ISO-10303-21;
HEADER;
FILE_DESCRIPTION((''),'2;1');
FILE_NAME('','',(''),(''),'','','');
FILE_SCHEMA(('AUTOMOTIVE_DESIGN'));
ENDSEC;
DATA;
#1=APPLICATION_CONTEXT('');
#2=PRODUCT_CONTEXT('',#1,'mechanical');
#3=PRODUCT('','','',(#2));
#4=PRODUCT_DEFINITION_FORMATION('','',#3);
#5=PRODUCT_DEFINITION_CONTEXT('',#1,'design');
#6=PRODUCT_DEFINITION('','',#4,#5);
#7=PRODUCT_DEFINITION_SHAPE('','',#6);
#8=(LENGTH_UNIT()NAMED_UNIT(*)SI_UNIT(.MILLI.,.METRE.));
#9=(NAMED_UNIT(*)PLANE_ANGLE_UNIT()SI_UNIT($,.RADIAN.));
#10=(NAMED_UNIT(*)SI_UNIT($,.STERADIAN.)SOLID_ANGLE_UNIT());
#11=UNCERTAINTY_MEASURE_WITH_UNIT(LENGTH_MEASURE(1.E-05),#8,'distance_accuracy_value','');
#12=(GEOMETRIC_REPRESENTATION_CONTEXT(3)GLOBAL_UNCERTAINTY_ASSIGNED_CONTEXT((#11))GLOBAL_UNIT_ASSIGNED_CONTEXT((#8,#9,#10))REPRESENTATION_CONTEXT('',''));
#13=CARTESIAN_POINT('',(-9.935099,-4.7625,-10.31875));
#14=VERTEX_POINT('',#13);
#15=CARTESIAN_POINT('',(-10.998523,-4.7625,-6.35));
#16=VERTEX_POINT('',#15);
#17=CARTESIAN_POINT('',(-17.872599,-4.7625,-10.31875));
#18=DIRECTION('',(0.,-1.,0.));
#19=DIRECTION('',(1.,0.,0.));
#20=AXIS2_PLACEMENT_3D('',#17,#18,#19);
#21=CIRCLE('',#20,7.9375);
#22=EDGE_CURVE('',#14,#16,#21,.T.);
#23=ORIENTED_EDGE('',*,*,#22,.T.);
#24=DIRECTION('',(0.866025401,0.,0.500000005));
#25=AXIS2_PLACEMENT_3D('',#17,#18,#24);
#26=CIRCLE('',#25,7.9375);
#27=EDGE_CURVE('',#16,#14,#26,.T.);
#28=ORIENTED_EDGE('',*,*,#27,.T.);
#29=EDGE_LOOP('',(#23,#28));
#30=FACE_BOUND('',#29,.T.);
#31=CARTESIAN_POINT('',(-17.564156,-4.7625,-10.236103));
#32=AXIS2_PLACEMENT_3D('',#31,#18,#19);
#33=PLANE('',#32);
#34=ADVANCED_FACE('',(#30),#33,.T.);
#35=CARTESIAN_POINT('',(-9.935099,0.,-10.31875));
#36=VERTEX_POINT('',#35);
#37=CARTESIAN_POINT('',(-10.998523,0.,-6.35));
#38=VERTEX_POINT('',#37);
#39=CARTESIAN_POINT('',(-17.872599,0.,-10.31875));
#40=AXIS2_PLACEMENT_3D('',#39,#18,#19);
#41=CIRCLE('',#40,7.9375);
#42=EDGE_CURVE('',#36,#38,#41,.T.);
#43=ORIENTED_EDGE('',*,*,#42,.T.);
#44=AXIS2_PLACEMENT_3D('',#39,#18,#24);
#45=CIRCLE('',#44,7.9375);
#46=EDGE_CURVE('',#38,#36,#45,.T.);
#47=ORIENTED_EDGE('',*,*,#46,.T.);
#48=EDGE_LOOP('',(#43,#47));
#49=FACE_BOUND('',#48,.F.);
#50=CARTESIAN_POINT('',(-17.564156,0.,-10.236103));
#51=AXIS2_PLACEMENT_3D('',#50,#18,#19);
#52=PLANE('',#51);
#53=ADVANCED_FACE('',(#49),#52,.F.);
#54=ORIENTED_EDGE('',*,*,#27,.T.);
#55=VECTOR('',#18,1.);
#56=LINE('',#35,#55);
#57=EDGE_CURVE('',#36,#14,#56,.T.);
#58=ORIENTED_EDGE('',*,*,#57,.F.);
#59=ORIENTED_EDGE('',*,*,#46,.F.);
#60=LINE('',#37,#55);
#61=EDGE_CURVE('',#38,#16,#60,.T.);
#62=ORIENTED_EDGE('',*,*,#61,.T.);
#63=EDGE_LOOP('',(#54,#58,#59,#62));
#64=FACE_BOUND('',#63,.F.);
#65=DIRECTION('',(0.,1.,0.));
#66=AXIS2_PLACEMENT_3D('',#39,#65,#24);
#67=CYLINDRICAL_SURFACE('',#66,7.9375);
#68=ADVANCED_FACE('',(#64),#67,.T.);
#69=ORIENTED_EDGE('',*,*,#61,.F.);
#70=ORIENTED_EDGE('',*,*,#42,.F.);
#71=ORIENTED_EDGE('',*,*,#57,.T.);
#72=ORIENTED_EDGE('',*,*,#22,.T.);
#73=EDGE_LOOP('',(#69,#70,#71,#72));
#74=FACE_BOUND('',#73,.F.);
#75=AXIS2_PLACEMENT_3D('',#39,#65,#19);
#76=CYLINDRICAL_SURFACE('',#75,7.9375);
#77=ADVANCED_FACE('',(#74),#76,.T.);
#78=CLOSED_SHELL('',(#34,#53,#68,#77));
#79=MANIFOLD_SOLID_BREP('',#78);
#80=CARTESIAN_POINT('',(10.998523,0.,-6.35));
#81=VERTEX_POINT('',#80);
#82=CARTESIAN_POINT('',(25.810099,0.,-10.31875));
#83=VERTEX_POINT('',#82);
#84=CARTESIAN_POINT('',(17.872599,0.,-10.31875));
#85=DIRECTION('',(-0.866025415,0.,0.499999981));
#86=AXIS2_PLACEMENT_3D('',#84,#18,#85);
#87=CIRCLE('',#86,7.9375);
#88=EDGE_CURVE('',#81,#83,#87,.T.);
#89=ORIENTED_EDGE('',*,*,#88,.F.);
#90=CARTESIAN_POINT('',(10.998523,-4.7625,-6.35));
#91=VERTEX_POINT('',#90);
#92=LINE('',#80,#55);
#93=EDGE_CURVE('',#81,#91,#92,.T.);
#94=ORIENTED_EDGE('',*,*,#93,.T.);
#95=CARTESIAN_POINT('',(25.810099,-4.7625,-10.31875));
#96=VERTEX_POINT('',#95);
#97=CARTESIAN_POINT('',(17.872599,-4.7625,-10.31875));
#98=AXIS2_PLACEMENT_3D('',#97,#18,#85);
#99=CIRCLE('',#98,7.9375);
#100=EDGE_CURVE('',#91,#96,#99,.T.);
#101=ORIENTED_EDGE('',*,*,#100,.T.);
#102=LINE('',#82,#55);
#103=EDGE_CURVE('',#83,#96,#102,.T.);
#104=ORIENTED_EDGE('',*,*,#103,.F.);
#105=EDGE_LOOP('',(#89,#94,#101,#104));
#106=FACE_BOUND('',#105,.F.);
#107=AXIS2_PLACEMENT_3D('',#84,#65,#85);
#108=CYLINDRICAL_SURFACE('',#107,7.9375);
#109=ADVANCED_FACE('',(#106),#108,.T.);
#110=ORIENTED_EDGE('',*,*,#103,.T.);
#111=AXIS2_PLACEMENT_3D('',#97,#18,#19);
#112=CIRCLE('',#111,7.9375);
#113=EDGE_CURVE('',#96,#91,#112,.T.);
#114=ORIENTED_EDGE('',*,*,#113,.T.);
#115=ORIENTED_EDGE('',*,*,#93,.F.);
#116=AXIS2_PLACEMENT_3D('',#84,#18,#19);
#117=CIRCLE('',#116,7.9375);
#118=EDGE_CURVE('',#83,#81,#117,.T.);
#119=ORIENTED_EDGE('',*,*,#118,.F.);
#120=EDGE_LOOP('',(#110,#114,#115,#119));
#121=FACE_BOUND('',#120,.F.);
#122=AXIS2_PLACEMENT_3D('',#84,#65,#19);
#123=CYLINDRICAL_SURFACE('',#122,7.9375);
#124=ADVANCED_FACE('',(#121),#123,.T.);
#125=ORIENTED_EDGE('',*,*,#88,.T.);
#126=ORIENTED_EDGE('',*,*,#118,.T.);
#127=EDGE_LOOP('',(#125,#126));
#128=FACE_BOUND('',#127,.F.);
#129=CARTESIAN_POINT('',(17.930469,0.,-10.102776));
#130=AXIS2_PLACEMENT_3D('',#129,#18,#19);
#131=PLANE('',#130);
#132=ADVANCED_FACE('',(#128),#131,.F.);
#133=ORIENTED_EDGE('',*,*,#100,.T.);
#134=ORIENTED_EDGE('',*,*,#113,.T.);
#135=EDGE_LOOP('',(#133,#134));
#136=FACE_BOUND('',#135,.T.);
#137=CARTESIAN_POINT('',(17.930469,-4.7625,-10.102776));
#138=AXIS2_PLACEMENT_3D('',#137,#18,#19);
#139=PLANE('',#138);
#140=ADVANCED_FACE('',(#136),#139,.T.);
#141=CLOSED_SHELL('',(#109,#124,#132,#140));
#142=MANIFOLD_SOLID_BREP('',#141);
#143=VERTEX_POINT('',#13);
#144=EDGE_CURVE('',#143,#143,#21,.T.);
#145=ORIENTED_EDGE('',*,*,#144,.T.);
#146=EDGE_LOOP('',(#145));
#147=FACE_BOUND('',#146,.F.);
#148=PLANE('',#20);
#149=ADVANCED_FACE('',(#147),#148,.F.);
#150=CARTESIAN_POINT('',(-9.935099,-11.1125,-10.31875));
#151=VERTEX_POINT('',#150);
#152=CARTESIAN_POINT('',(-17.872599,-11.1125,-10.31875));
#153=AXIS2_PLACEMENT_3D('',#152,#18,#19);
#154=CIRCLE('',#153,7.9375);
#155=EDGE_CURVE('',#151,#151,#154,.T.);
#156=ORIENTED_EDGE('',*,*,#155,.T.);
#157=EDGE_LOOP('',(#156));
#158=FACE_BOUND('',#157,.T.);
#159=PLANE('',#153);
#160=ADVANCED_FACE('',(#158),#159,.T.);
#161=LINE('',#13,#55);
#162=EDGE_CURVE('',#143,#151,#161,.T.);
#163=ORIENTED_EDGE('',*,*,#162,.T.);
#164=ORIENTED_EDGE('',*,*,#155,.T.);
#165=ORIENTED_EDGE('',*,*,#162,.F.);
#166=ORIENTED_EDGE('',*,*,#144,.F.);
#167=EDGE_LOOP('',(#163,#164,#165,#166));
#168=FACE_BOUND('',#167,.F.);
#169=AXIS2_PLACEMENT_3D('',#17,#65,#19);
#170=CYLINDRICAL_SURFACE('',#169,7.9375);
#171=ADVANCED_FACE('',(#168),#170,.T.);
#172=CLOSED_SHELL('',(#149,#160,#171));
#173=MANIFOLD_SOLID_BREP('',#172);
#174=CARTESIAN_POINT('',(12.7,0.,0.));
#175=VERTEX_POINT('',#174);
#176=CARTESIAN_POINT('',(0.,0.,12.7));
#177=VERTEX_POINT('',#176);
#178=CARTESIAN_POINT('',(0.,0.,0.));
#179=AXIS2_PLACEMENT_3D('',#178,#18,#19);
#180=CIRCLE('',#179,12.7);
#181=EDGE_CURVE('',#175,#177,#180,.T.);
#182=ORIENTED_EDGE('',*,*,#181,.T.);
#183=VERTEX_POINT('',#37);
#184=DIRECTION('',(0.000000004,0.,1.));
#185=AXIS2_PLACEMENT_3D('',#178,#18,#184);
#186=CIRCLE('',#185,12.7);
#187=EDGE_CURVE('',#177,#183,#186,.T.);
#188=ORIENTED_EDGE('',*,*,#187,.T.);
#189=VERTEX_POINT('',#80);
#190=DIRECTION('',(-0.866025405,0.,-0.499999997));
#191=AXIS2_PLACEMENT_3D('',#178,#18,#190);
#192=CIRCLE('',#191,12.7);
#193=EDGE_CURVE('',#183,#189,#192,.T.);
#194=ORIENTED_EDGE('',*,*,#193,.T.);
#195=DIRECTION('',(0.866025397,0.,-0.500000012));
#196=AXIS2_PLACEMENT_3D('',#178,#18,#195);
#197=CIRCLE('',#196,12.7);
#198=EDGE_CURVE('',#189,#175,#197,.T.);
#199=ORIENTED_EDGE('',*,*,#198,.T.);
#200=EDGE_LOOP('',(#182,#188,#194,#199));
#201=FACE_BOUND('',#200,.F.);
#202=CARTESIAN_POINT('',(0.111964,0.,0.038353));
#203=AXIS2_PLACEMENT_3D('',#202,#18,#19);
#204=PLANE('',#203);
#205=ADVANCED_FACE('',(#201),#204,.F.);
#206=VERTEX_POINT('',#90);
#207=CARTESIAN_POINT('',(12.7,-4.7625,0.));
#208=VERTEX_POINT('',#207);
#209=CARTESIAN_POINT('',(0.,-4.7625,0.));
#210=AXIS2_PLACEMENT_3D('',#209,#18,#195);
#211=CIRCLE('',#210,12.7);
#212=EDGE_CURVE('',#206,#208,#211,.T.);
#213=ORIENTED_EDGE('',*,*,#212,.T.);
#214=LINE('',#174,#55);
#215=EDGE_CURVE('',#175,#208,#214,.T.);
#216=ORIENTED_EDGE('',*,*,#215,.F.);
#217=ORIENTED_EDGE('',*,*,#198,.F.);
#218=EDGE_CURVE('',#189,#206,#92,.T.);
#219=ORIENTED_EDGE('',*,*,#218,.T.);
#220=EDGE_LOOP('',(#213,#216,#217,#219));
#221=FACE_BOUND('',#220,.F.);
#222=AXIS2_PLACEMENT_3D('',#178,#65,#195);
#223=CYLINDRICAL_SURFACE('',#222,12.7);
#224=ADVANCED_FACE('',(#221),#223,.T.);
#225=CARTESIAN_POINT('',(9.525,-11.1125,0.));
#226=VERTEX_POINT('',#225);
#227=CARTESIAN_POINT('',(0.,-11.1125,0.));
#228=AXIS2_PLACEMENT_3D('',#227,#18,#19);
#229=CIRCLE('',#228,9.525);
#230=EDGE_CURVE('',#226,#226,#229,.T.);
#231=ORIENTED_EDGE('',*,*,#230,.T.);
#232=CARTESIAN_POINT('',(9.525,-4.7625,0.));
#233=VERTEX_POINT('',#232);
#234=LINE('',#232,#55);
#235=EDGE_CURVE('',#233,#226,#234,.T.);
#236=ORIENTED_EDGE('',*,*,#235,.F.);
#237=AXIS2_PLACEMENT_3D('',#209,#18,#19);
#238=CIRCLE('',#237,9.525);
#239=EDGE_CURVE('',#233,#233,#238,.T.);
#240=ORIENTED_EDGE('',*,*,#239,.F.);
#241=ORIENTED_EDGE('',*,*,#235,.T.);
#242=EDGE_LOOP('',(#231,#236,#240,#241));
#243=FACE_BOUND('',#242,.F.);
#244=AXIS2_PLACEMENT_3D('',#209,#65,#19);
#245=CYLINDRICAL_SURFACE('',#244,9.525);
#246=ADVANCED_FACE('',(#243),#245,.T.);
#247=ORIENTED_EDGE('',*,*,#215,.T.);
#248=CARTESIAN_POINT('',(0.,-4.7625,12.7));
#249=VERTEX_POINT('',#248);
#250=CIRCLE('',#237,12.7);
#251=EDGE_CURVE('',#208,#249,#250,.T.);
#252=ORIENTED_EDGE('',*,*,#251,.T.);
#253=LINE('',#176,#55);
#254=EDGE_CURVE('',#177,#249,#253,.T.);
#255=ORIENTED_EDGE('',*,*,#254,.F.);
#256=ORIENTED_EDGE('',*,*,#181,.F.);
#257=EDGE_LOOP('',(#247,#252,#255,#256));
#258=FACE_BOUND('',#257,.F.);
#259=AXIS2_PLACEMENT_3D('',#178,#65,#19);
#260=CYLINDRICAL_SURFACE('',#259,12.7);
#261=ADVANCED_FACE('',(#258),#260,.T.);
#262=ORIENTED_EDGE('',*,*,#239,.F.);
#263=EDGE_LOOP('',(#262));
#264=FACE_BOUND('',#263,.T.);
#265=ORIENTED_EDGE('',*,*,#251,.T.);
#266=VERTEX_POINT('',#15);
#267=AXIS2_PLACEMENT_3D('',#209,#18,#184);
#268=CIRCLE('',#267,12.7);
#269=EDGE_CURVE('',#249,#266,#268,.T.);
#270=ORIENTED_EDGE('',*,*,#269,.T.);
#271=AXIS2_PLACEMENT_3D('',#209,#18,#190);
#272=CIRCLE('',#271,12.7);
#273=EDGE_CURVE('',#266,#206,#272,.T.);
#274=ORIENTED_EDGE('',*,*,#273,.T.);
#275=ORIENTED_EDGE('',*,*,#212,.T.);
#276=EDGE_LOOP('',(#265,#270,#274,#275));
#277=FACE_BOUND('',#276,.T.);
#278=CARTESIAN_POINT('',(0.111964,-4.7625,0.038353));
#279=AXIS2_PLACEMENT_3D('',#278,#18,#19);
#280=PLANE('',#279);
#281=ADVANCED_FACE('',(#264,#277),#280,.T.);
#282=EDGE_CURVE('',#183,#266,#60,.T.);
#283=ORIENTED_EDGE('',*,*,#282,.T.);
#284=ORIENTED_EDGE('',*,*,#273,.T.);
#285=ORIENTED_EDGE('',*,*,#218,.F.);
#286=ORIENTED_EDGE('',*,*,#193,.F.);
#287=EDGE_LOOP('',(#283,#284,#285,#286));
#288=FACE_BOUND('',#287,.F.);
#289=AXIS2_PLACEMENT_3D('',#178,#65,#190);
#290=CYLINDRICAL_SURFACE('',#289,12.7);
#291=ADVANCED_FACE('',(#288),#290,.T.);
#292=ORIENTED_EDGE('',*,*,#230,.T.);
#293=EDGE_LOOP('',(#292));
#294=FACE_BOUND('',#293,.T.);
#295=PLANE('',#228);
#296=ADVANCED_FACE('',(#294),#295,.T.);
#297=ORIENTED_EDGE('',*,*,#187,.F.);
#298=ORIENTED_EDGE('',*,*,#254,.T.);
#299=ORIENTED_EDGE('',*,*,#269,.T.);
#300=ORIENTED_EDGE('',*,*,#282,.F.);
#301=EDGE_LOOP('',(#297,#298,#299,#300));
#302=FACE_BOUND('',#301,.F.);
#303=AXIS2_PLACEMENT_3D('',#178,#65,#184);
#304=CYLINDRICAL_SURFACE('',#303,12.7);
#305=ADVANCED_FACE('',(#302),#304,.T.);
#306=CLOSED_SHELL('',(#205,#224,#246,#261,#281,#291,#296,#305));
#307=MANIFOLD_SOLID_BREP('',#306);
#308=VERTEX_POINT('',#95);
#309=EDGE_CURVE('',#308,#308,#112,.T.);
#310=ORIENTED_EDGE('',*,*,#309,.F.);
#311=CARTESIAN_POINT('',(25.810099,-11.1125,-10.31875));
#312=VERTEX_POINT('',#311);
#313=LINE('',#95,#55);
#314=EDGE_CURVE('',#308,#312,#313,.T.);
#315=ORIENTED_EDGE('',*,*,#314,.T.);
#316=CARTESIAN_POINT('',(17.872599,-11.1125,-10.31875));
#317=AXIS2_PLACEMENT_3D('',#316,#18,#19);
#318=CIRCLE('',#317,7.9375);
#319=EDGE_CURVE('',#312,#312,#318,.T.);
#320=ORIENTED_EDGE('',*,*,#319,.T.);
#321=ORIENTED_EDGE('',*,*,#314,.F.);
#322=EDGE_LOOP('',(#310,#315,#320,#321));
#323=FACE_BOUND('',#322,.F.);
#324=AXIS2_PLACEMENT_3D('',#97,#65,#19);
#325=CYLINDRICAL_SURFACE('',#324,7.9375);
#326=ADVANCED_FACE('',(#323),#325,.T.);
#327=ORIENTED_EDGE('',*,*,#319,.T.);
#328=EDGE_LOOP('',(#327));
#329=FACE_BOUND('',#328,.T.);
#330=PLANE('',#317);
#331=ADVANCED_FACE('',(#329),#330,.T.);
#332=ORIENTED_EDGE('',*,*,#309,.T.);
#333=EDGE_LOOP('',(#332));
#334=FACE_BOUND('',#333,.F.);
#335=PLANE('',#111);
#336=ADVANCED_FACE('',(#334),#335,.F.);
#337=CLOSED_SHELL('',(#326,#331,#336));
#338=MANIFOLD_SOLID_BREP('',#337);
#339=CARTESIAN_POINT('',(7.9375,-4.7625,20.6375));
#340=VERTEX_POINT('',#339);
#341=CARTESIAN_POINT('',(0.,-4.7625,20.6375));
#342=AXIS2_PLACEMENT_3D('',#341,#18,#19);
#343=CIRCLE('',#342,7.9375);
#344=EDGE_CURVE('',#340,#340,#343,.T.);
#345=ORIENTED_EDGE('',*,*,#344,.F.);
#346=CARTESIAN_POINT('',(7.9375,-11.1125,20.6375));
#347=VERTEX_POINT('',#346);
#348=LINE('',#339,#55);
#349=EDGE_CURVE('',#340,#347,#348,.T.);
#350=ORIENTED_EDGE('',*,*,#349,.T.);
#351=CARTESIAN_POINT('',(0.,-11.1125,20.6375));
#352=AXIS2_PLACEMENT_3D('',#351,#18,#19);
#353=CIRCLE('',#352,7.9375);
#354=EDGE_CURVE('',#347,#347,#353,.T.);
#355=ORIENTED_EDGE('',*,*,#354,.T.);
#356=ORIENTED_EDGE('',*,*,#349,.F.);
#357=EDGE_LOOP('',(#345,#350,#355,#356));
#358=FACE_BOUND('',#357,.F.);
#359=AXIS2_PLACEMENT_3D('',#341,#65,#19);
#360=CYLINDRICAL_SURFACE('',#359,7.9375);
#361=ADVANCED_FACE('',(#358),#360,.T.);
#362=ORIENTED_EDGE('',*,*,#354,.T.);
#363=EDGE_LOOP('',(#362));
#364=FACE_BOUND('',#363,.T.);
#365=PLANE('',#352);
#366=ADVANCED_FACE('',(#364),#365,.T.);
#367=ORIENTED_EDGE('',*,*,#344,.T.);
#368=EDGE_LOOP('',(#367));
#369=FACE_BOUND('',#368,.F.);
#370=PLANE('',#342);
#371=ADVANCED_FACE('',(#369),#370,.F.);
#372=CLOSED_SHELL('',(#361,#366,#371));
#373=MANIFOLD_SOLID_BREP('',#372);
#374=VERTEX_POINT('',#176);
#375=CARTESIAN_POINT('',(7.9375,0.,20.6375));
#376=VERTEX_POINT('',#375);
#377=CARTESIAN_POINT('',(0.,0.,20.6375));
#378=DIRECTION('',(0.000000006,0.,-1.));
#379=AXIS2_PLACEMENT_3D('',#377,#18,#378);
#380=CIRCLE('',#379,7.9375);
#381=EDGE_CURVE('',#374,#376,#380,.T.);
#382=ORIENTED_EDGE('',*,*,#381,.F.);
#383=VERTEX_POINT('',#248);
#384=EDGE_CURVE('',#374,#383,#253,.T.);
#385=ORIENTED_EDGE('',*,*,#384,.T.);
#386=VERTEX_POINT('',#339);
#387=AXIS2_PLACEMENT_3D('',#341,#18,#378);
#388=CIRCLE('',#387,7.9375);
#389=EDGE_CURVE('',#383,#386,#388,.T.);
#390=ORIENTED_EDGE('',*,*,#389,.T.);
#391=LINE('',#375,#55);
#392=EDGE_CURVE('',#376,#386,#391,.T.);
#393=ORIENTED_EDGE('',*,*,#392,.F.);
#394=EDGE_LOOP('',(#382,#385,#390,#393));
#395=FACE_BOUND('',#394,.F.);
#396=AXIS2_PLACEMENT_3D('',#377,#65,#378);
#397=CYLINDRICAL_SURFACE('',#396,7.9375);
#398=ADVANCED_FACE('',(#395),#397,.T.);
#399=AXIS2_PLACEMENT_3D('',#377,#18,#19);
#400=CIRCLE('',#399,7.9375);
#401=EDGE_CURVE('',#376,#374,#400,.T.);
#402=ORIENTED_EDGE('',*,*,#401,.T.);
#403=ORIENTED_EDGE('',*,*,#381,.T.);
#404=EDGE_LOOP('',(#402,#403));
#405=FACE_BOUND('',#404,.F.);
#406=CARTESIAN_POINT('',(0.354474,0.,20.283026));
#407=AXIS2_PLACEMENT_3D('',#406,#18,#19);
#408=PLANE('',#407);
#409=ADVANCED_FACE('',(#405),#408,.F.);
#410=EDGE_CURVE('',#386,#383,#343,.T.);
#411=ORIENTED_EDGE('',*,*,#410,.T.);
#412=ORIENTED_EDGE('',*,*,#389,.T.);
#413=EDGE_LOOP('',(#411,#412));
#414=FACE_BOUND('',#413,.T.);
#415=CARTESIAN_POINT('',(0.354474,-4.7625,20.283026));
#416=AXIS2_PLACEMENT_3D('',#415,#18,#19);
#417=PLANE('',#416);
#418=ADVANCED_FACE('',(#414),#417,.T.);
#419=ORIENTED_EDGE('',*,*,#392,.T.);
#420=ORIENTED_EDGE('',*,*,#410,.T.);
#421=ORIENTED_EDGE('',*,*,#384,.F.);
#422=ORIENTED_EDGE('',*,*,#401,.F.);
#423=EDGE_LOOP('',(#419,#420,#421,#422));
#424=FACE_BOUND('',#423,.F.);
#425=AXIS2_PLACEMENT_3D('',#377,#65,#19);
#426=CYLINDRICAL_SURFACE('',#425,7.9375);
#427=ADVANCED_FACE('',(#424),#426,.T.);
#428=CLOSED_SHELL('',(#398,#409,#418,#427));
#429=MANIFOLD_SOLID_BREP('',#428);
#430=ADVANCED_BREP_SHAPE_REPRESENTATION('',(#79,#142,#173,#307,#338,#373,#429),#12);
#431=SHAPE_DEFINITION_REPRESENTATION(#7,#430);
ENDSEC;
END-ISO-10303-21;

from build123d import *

# Parameters (mm, degrees)
F1_DEPTH = 4.7625
F2_R     = 9.525
F3_DEPTH = 6.35
F2_R_2   = 7.9375


with BuildPart() as f1:
    # F0 (on Front) → F1 (new body)
    with BuildSketch(Plane.XZ):
        with BuildLine():
            ThreePointArc((10.9985225391, -6.3500001541), (12.2672579708, -3.2870019587), (12.7, 0))
            ThreePointArc((12.7, 0), (8.9802561389, 8.9802561032), (5.05e-08, 12.7))
            ThreePointArc((5.05e-08, 12.7), (-10.9985226051, 6.3500000397), (-10.9985226487, -6.3499999643))
            ThreePointArc((-10.9985226487, -6.3499999643), (-1.096e-07, -12.7), (10.9985225391, -6.3500001541))
        make_face()
    extrude(amount=F1_DEPTH)

    # F2 (on face) → F3 (join)
    with BuildSketch(Plane.XZ.offset(4.7625)):
        Circle(F2_R)
    extrude(amount=F3_DEPTH)


with BuildPart() as f1b:
    # F0 (on Front) → F1, piece 2 (new body)
    with BuildSketch(Plane.XZ):
        with BuildLine():
            ThreePointArc((25.8100992706, -10.31875), (19.9269753552, -2.6517137308), (10.9985225391, -6.3500001541))
            ThreePointArc((10.9985225391, -6.3500001541), (15.818223186, -17.9857862692), (25.8100992706, -10.31875))
        make_face()
    extrude(amount=F1_DEPTH)


with BuildPart() as f1c:
    # F0 (on Front) → F1, piece 3 (new body)
    with BuildSketch(Plane.XZ):
        with BuildLine():
            ThreePointArc((-9.9350992706, -10.31875), (-10.2055630298, -8.2643738096), (-10.9985226487, -6.3499999643))
            ThreePointArc((-10.9985226487, -6.3499999643), (-25.5396355114, -12.3731261904), (-9.9350992706, -10.31875))
        make_face()
    extrude(amount=F1_DEPTH)


with BuildPart() as f1d:
    # F0 (on Front) → F1, piece 4 (new body)
    with BuildSketch(Plane.XZ):
        with BuildLine():
            ThreePointArc((7.9375, 20.6375), (-5.6126600935, 26.2501600578), (5.05e-08, 12.7))
            ThreePointArc((5.05e-08, 12.7), (5.6126600935, 15.0248399422), (7.9375, 20.6375))
        make_face()
    extrude(amount=F1_DEPTH)


with BuildPart() as f3:
    # F2 (on face) → F3, piece 2 (new body)
    with BuildSketch(Plane.XZ.offset(4.7625)):
        with Locations((-17.8725992706, -10.31875)):
            Circle(F2_R_2)
    extrude(amount=F3_DEPTH)


with BuildPart() as f3b:
    # F2 (on face) → F3, piece 3 (new body)
    with BuildSketch(Plane.XZ.offset(4.7625)):
        with Locations((0, 20.6375)):
            Circle(F2_R_2)
    extrude(amount=F3_DEPTH)


with BuildPart() as f3c:
    # F2 (on face) → F3, piece 4 (new body)
    with BuildSketch(Plane.XZ.offset(4.7625)):
        with Locations((17.8725992706, -10.31875)):
            Circle(F2_R_2)
    extrude(amount=F3_DEPTH)


solid = Compound([f1.part, f1b.part, f1c.part, f1d.part, f3.part, f3b.part, f3c.part])
